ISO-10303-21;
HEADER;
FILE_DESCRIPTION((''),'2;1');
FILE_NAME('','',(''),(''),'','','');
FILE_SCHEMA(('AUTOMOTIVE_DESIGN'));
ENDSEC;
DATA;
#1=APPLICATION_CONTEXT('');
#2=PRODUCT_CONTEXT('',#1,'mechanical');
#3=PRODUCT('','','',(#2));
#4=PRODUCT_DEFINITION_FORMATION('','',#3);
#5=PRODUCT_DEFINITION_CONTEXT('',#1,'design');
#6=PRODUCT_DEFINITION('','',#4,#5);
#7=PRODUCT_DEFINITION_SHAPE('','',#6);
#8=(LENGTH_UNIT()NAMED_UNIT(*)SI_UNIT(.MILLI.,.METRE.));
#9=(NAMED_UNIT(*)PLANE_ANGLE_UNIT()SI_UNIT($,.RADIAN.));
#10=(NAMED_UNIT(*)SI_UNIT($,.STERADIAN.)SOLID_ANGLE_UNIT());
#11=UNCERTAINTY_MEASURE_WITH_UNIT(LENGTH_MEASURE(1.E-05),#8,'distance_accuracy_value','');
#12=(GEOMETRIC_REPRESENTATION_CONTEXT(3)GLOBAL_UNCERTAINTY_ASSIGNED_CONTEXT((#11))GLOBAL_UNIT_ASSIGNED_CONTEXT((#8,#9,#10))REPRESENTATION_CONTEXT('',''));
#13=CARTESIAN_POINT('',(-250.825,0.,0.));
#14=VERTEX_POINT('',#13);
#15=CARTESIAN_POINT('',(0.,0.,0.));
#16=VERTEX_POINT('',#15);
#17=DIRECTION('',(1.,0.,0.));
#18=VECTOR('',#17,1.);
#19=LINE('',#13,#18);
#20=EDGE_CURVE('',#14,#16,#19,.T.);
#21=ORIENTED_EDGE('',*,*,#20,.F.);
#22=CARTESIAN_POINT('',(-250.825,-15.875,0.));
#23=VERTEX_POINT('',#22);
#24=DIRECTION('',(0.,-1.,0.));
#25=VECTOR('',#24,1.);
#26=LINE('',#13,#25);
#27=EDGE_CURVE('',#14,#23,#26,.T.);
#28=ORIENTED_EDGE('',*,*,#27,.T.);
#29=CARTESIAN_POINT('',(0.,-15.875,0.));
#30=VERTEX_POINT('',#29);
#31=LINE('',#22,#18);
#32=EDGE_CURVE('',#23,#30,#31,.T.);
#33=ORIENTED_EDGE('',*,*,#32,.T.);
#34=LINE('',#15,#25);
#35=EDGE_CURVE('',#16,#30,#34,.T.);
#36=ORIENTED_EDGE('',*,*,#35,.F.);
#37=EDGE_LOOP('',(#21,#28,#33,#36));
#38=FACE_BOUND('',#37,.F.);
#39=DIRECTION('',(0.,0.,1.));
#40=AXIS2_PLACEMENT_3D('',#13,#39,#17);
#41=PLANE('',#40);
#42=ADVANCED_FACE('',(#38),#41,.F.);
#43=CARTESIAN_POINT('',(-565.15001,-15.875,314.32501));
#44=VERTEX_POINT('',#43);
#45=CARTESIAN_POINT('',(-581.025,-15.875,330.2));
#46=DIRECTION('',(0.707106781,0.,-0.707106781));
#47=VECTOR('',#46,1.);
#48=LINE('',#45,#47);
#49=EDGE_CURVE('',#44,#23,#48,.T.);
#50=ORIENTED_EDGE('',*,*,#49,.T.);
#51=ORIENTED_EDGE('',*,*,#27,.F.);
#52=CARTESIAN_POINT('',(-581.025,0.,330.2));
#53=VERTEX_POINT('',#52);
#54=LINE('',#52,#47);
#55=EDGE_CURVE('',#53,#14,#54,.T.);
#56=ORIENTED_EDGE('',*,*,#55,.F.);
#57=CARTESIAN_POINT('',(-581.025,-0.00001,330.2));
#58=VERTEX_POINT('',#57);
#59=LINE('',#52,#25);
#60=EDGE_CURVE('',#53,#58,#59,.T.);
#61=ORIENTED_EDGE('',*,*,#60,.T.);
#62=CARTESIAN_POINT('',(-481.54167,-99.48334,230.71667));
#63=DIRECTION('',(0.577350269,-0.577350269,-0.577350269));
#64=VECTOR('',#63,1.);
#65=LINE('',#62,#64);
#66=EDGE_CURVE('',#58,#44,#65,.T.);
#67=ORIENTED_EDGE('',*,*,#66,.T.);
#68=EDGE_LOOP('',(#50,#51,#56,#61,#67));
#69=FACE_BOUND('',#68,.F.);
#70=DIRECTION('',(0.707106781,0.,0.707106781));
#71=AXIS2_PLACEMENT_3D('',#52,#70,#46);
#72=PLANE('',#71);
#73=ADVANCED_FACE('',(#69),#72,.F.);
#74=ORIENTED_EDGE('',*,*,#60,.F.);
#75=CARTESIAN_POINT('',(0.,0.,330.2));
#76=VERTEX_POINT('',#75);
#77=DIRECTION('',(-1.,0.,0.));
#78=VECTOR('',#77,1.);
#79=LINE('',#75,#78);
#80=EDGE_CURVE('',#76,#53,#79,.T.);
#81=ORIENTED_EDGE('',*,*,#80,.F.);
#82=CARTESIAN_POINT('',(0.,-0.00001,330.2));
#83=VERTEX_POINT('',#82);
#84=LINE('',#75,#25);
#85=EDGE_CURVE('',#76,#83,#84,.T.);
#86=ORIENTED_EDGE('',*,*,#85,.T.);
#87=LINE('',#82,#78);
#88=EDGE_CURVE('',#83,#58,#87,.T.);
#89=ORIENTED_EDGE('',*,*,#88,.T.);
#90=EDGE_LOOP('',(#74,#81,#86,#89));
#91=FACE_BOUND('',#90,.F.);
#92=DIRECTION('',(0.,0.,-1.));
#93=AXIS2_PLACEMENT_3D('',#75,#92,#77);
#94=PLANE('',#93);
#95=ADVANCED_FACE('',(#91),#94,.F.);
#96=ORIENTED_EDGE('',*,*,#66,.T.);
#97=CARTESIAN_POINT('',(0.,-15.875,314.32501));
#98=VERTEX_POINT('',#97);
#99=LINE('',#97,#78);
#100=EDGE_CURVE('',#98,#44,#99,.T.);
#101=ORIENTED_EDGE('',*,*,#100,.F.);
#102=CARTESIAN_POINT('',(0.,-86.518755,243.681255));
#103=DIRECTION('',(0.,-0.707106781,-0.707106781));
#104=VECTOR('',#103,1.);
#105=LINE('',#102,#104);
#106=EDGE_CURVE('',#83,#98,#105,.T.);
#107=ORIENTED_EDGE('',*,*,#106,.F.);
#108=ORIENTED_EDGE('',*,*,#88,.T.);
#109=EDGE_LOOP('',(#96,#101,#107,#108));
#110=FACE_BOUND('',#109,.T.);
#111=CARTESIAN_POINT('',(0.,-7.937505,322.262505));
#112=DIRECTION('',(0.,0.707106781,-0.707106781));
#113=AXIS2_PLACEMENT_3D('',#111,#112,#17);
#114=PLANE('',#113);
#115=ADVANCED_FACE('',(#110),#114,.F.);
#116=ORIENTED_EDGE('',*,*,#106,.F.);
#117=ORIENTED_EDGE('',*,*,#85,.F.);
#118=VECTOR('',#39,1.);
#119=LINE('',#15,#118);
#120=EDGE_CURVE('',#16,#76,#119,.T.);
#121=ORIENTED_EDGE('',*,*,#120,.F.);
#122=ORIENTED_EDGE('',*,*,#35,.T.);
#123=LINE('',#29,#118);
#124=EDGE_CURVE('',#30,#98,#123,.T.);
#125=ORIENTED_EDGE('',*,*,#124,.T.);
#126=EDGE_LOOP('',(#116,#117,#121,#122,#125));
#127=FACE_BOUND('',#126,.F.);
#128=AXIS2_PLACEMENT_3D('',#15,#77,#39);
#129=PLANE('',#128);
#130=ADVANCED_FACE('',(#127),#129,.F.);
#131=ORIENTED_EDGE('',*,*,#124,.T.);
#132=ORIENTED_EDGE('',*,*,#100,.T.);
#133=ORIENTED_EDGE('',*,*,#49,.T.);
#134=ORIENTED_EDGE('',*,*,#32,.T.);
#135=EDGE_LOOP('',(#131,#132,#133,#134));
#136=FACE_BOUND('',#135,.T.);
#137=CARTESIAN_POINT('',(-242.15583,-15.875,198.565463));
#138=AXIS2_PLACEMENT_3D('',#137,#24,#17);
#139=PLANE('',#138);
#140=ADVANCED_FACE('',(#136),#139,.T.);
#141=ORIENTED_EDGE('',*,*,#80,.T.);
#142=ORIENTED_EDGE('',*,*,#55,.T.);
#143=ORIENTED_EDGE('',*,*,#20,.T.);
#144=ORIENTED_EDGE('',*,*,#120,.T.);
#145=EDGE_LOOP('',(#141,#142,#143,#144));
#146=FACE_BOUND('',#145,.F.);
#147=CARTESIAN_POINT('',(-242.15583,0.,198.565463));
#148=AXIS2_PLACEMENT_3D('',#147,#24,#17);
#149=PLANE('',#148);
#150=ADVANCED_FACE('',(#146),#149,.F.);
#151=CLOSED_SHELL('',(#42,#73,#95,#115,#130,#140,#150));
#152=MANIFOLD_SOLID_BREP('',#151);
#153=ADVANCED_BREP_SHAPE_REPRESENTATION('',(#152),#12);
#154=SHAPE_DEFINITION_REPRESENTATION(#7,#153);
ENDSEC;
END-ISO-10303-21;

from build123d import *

# Parameters (mm, degrees)
F1_DEPTH = 15.875
F2_SIZE  = 15.87499


# Not quite as in the source:
# - a fillet or chamfer is up to 0.001 mm smaller than in the source, because OpenCascade refuses the exact size


with BuildPart() as f1:
    # F0 (on Front) → F1 (new body)
    with BuildSketch(Plane.XZ):
        Polygon((-250.825, 0), (0, 0), (0, 330.2), (-581.025, 330.2), align=None)
    extrude(amount=F1_DEPTH)

    # F2 (size 15.875 in the source; OpenCascade refuses exactly that, so slightly less here)
    f2_edges = [f1.edges().sort_by_distance(p)[0] for p in [
        (-290.5125, -15.875, 330.2),
    ]]
    chamfer(f2_edges, length=F2_SIZE)


solid = f1.part
